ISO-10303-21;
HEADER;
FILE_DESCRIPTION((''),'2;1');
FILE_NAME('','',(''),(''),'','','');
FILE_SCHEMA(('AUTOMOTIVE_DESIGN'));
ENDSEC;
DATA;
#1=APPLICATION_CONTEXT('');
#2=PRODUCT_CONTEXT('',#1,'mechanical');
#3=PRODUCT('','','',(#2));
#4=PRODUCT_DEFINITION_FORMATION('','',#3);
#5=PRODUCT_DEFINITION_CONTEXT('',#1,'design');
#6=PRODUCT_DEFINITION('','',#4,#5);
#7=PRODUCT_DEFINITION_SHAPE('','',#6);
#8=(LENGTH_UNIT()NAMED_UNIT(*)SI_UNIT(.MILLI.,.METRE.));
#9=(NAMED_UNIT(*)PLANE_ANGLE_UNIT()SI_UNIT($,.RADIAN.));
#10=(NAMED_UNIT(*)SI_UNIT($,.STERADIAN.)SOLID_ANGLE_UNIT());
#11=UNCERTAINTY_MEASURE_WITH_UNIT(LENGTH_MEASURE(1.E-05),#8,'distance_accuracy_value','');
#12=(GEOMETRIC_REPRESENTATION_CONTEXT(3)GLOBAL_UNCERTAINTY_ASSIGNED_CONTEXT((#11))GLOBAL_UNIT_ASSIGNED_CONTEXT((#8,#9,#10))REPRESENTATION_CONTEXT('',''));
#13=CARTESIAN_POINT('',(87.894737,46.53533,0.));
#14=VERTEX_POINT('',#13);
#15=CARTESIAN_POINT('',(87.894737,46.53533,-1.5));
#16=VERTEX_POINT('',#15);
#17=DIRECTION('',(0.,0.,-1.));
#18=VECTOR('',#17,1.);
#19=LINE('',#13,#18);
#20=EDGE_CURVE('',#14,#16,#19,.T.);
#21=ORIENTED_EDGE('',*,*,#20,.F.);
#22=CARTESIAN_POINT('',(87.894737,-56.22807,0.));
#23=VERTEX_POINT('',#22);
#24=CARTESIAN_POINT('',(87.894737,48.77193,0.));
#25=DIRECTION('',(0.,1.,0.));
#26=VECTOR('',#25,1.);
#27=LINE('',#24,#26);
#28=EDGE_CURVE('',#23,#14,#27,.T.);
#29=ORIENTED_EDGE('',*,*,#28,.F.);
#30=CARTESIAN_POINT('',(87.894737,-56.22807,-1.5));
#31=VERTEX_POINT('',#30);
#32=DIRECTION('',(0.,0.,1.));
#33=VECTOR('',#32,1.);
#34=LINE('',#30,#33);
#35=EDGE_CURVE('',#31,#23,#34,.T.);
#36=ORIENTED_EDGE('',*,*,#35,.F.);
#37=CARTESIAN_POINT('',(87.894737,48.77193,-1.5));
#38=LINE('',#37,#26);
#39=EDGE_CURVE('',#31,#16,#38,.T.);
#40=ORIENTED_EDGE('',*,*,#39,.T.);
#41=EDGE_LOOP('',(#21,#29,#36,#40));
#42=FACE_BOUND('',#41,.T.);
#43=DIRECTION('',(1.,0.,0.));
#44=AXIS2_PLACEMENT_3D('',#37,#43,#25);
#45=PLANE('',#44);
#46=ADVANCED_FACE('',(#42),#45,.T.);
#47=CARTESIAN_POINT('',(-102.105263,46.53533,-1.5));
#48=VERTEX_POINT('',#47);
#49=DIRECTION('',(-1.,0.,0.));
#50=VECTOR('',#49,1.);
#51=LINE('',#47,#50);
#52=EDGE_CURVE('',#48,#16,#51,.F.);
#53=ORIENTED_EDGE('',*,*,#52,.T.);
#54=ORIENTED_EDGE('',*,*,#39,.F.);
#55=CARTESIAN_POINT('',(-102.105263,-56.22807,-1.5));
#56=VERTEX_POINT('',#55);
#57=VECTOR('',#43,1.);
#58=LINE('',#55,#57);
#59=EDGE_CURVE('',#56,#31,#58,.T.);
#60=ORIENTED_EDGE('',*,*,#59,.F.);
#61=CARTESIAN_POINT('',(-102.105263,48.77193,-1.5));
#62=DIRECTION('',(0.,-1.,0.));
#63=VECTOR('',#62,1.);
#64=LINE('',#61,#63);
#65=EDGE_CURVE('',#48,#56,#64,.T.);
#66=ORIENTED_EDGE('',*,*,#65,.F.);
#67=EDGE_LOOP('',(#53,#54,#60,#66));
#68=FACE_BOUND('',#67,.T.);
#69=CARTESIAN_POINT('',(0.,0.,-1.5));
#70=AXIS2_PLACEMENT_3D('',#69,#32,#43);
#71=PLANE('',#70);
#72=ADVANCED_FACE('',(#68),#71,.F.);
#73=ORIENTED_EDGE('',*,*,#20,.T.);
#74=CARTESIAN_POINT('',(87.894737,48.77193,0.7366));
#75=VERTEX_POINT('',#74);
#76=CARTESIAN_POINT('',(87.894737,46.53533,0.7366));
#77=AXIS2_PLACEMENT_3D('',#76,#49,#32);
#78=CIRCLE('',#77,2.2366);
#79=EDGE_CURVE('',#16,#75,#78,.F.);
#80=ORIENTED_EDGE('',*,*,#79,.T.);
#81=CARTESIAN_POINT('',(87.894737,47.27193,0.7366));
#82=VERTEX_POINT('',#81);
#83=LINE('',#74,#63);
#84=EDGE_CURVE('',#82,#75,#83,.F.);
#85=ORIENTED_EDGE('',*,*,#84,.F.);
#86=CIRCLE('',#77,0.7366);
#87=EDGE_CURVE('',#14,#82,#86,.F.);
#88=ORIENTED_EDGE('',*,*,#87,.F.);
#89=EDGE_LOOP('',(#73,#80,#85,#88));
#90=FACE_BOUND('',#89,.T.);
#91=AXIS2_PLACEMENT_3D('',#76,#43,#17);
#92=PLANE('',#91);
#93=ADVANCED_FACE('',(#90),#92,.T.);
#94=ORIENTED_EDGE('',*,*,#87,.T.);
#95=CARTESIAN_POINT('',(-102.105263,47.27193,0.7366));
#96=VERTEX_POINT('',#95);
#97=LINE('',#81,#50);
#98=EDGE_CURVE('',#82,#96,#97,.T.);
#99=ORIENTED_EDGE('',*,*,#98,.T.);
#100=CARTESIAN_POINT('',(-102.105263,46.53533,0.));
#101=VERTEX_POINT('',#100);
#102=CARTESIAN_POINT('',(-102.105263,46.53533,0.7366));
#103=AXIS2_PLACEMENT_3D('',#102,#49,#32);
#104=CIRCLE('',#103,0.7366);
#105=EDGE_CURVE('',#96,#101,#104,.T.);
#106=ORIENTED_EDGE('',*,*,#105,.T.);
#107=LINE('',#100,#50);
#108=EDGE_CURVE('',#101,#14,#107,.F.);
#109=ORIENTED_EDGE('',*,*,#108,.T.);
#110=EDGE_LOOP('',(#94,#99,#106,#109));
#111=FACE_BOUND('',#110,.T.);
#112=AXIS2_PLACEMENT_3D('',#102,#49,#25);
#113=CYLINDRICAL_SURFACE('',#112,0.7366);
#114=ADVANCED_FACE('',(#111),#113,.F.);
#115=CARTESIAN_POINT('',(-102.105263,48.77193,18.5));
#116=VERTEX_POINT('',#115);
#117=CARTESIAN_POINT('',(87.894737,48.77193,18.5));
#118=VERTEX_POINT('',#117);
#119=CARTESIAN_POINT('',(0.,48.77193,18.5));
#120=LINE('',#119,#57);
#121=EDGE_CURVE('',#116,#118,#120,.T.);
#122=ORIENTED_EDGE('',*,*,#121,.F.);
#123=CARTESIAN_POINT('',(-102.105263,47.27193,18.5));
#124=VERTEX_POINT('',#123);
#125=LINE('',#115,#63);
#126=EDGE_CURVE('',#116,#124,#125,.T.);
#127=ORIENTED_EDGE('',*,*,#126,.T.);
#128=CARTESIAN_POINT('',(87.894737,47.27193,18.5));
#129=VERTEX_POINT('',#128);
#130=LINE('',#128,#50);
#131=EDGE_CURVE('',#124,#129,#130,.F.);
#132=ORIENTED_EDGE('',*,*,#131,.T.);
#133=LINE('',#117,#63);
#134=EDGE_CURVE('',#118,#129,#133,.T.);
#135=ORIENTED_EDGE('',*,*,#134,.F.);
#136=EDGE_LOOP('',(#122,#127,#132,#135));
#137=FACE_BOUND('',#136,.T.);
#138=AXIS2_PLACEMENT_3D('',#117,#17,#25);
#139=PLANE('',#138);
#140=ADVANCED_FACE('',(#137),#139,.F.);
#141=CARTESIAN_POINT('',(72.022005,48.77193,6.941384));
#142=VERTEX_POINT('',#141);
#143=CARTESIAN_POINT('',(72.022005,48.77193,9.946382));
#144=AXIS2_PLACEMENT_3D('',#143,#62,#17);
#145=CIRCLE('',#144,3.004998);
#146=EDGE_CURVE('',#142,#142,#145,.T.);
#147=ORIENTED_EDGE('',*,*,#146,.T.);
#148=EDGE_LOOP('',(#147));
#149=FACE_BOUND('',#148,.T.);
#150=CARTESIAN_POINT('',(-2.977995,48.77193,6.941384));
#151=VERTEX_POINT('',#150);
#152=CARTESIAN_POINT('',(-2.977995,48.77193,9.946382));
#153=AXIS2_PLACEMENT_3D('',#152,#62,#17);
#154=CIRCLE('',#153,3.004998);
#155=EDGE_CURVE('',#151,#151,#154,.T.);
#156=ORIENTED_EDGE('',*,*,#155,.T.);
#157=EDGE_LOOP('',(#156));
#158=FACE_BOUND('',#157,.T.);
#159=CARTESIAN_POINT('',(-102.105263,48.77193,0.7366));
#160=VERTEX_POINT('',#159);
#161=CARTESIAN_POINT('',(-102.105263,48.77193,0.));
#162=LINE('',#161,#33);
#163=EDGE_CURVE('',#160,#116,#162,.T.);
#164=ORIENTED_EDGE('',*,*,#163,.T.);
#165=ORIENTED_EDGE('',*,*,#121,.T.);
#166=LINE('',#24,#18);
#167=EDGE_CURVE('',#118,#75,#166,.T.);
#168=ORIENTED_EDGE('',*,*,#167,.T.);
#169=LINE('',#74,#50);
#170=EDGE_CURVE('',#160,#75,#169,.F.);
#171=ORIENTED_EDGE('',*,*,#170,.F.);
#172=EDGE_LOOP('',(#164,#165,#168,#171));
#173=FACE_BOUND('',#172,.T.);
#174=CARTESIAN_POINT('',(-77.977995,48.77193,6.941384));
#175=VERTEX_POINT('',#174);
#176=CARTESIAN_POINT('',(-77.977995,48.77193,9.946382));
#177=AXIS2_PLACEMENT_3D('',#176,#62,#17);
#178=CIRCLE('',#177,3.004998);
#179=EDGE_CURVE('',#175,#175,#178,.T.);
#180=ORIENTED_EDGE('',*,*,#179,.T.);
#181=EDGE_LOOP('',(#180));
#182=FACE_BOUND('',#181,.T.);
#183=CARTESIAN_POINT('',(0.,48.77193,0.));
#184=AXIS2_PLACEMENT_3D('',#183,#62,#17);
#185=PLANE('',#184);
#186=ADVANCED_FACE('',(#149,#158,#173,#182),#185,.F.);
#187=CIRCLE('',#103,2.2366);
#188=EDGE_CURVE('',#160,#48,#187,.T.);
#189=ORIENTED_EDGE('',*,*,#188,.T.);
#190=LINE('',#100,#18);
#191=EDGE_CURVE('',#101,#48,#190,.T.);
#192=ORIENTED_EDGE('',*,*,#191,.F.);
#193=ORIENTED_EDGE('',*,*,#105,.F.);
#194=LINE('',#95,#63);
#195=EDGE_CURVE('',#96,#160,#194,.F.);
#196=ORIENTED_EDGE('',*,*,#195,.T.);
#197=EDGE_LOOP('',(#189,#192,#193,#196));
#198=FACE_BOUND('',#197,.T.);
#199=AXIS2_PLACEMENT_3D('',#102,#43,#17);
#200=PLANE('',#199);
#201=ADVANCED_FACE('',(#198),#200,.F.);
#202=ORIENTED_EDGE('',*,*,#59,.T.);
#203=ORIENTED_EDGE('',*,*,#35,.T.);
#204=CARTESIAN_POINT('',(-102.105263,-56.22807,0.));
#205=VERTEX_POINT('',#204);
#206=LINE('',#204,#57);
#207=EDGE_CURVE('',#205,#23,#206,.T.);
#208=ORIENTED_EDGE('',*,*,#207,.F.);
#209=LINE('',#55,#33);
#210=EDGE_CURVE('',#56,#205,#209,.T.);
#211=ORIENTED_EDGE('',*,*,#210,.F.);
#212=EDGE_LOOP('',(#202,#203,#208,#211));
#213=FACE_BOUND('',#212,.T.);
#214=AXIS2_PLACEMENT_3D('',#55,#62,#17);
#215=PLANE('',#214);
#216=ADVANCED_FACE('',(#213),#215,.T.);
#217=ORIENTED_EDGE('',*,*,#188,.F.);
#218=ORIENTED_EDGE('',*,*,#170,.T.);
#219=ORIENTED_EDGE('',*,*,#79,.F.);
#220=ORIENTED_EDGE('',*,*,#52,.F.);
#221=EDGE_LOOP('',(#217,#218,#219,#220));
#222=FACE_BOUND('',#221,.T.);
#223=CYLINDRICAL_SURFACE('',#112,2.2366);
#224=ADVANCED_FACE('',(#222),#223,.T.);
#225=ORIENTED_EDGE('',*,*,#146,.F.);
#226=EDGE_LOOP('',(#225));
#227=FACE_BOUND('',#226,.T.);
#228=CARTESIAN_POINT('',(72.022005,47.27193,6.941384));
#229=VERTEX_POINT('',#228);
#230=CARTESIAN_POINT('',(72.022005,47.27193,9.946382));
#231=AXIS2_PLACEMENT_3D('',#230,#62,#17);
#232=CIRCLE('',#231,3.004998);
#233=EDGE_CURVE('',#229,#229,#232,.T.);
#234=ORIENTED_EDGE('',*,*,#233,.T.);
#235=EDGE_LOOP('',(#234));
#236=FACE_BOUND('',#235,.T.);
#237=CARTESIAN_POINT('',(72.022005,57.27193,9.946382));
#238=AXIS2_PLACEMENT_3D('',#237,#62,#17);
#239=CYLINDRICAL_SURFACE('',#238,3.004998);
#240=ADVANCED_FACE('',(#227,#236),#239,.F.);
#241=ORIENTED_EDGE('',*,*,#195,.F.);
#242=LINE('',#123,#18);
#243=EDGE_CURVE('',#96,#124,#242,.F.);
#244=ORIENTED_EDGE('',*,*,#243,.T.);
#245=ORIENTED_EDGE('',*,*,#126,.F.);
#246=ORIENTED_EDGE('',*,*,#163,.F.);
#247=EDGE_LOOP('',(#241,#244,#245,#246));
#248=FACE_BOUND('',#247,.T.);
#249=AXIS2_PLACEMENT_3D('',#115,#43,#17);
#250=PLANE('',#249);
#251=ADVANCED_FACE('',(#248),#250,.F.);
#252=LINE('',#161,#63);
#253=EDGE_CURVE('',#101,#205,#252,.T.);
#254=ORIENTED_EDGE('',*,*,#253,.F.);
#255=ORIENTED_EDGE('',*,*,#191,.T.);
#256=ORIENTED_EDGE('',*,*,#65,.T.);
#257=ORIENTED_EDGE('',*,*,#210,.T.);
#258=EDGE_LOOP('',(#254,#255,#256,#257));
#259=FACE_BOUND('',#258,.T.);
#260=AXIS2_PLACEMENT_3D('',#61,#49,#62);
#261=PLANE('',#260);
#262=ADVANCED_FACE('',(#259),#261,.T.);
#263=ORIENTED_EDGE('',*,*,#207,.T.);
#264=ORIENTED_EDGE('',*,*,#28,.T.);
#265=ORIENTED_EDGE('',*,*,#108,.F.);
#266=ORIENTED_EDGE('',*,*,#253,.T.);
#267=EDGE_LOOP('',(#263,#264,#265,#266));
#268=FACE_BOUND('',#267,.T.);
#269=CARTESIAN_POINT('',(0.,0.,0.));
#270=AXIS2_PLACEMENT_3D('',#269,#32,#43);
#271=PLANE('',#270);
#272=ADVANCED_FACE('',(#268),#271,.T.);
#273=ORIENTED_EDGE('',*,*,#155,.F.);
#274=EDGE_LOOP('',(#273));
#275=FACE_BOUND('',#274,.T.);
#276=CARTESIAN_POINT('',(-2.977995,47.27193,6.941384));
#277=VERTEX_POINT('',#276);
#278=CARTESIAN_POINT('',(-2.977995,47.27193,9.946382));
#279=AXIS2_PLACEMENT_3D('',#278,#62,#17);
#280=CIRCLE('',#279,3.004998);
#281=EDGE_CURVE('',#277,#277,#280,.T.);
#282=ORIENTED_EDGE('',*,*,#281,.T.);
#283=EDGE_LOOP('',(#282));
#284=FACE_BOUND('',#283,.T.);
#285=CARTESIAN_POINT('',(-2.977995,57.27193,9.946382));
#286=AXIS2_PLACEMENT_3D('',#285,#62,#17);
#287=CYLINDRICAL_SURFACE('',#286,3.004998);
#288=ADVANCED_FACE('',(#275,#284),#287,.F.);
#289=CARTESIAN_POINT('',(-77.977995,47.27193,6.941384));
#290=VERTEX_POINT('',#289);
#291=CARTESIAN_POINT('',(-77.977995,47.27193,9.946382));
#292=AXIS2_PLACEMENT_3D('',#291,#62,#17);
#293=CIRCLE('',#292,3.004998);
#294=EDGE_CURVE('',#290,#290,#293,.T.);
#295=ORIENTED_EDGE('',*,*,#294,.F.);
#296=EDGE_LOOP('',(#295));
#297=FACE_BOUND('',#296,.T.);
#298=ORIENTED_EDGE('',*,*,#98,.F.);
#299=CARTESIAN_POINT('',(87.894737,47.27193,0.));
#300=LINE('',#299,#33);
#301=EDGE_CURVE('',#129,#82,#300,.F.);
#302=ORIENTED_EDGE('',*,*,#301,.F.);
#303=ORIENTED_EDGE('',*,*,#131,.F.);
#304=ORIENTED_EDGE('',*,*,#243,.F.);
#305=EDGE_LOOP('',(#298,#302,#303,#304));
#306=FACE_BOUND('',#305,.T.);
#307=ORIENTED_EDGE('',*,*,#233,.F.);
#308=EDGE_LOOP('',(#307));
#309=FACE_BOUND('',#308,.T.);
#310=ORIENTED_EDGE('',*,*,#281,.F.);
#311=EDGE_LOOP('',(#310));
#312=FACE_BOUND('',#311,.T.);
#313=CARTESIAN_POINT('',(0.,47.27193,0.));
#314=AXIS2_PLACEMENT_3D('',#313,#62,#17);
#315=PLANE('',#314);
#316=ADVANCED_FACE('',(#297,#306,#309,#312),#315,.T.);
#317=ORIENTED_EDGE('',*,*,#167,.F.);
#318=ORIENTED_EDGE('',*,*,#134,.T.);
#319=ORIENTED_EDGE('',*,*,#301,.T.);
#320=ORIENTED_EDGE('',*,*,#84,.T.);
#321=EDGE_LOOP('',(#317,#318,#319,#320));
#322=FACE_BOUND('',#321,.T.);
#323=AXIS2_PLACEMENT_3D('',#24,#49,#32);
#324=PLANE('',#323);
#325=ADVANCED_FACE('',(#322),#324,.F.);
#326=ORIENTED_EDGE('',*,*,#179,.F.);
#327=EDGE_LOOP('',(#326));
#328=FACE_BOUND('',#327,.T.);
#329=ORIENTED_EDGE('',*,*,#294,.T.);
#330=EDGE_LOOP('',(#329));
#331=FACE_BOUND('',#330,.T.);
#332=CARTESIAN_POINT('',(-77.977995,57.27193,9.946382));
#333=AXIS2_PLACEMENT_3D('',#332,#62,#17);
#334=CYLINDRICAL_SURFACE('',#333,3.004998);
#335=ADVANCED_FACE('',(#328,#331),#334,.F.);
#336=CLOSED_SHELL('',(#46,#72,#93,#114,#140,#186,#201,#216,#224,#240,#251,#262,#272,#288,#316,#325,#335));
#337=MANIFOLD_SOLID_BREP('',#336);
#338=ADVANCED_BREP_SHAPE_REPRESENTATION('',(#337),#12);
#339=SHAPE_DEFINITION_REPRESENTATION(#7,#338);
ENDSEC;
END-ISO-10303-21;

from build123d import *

# Parameters (mm, degrees)
SKETCH1_W                    = 190
SKETCH1_H                    = 105
BASE_FLANGE1_DEPTH           = 1.5
EDGE_FLANGE1_STRIP_W         = 7.4732
EDGE_FLANGE1_STRIP_H         = 1.5
EDGE_FLANGE1_STRIP_CUT_DEPTH = 190
EDGE_FLANGE1_DEPTH           = 190
SKETCH9_R                    = 3.004998415
CUT_EXTRUDE1_DEPTH           = 10
LPATTERN1_COUNT              = 3
LPATTERN1_PITCH              = 75


# Sheet-metal steps are written as plain solids
with BuildPart() as part:
    # Sketch1 → Base-Flange1 (new body)
    with BuildSketch(Plane.XY):
        with Locations((-7.105263158, -3.728070175)):
            Rectangle(SKETCH1_W, SKETCH1_H)
    extrude(amount=-BASE_FLANGE1_DEPTH)

    # Edge-Flange1 strip (across the edge) → Edge-Flange1 strip cut (cut)
    with BuildSketch(Plane(origin=(87.894736842, 48.771929825, 0), x_dir=(0, -1, 0), z_dir=(-1, 0, 0))):
        with Locations((-1.5, -0.75)):
            Rectangle(EDGE_FLANGE1_STRIP_W, EDGE_FLANGE1_STRIP_H)
    extrude(amount=EDGE_FLANGE1_STRIP_CUT_DEPTH, mode=Mode.SUBTRACT)

    # Edge-Flange1 section (across the edge) → Edge-Flange1 (add)
    with BuildSketch(Plane(origin=(87.894736842, 48.771929825, 0), x_dir=(0, -1, 0), z_dir=(-1, 0, 0))):
        with BuildLine():
            Line((0, 0.7366), (0, 18.5))
            Line((0, 18.5), (1.5, 18.5))
            Line((1.5, 18.5), (1.5, 0.7366))
            ThreePointArc((1.5, 0.7366), (1.715745145, 0.215745145), (2.2366, 0))
            Line((2.2366, 0), (2.2366, -1.5))
            ThreePointArc((2.2366, -1.5), (0.655084973, -0.844915027), (0, 0.7366))
        make_face()
    extrude(amount=EDGE_FLANGE1_DEPTH)

    # Sketch9 → Cut-Extrude1 (cut)
    with BuildSketch(Plane.XZ.offset(-47.271929825)):
        with Locations(Location((-77.977994627, 9.946382275, 0), (0, 0, 270))):
            Circle(SKETCH9_R)
    cut_extrude1 = extrude(amount=-CUT_EXTRUDE1_DEPTH, mode=Mode.SUBTRACT)

    # LPattern1: Cut-Extrude1 ×3
    with Locations(*[(i * LPATTERN1_PITCH, 0, 0) for i in range(1, LPATTERN1_COUNT)]):
        add(cut_extrude1, mode=Mode.SUBTRACT)


solid = part.part
